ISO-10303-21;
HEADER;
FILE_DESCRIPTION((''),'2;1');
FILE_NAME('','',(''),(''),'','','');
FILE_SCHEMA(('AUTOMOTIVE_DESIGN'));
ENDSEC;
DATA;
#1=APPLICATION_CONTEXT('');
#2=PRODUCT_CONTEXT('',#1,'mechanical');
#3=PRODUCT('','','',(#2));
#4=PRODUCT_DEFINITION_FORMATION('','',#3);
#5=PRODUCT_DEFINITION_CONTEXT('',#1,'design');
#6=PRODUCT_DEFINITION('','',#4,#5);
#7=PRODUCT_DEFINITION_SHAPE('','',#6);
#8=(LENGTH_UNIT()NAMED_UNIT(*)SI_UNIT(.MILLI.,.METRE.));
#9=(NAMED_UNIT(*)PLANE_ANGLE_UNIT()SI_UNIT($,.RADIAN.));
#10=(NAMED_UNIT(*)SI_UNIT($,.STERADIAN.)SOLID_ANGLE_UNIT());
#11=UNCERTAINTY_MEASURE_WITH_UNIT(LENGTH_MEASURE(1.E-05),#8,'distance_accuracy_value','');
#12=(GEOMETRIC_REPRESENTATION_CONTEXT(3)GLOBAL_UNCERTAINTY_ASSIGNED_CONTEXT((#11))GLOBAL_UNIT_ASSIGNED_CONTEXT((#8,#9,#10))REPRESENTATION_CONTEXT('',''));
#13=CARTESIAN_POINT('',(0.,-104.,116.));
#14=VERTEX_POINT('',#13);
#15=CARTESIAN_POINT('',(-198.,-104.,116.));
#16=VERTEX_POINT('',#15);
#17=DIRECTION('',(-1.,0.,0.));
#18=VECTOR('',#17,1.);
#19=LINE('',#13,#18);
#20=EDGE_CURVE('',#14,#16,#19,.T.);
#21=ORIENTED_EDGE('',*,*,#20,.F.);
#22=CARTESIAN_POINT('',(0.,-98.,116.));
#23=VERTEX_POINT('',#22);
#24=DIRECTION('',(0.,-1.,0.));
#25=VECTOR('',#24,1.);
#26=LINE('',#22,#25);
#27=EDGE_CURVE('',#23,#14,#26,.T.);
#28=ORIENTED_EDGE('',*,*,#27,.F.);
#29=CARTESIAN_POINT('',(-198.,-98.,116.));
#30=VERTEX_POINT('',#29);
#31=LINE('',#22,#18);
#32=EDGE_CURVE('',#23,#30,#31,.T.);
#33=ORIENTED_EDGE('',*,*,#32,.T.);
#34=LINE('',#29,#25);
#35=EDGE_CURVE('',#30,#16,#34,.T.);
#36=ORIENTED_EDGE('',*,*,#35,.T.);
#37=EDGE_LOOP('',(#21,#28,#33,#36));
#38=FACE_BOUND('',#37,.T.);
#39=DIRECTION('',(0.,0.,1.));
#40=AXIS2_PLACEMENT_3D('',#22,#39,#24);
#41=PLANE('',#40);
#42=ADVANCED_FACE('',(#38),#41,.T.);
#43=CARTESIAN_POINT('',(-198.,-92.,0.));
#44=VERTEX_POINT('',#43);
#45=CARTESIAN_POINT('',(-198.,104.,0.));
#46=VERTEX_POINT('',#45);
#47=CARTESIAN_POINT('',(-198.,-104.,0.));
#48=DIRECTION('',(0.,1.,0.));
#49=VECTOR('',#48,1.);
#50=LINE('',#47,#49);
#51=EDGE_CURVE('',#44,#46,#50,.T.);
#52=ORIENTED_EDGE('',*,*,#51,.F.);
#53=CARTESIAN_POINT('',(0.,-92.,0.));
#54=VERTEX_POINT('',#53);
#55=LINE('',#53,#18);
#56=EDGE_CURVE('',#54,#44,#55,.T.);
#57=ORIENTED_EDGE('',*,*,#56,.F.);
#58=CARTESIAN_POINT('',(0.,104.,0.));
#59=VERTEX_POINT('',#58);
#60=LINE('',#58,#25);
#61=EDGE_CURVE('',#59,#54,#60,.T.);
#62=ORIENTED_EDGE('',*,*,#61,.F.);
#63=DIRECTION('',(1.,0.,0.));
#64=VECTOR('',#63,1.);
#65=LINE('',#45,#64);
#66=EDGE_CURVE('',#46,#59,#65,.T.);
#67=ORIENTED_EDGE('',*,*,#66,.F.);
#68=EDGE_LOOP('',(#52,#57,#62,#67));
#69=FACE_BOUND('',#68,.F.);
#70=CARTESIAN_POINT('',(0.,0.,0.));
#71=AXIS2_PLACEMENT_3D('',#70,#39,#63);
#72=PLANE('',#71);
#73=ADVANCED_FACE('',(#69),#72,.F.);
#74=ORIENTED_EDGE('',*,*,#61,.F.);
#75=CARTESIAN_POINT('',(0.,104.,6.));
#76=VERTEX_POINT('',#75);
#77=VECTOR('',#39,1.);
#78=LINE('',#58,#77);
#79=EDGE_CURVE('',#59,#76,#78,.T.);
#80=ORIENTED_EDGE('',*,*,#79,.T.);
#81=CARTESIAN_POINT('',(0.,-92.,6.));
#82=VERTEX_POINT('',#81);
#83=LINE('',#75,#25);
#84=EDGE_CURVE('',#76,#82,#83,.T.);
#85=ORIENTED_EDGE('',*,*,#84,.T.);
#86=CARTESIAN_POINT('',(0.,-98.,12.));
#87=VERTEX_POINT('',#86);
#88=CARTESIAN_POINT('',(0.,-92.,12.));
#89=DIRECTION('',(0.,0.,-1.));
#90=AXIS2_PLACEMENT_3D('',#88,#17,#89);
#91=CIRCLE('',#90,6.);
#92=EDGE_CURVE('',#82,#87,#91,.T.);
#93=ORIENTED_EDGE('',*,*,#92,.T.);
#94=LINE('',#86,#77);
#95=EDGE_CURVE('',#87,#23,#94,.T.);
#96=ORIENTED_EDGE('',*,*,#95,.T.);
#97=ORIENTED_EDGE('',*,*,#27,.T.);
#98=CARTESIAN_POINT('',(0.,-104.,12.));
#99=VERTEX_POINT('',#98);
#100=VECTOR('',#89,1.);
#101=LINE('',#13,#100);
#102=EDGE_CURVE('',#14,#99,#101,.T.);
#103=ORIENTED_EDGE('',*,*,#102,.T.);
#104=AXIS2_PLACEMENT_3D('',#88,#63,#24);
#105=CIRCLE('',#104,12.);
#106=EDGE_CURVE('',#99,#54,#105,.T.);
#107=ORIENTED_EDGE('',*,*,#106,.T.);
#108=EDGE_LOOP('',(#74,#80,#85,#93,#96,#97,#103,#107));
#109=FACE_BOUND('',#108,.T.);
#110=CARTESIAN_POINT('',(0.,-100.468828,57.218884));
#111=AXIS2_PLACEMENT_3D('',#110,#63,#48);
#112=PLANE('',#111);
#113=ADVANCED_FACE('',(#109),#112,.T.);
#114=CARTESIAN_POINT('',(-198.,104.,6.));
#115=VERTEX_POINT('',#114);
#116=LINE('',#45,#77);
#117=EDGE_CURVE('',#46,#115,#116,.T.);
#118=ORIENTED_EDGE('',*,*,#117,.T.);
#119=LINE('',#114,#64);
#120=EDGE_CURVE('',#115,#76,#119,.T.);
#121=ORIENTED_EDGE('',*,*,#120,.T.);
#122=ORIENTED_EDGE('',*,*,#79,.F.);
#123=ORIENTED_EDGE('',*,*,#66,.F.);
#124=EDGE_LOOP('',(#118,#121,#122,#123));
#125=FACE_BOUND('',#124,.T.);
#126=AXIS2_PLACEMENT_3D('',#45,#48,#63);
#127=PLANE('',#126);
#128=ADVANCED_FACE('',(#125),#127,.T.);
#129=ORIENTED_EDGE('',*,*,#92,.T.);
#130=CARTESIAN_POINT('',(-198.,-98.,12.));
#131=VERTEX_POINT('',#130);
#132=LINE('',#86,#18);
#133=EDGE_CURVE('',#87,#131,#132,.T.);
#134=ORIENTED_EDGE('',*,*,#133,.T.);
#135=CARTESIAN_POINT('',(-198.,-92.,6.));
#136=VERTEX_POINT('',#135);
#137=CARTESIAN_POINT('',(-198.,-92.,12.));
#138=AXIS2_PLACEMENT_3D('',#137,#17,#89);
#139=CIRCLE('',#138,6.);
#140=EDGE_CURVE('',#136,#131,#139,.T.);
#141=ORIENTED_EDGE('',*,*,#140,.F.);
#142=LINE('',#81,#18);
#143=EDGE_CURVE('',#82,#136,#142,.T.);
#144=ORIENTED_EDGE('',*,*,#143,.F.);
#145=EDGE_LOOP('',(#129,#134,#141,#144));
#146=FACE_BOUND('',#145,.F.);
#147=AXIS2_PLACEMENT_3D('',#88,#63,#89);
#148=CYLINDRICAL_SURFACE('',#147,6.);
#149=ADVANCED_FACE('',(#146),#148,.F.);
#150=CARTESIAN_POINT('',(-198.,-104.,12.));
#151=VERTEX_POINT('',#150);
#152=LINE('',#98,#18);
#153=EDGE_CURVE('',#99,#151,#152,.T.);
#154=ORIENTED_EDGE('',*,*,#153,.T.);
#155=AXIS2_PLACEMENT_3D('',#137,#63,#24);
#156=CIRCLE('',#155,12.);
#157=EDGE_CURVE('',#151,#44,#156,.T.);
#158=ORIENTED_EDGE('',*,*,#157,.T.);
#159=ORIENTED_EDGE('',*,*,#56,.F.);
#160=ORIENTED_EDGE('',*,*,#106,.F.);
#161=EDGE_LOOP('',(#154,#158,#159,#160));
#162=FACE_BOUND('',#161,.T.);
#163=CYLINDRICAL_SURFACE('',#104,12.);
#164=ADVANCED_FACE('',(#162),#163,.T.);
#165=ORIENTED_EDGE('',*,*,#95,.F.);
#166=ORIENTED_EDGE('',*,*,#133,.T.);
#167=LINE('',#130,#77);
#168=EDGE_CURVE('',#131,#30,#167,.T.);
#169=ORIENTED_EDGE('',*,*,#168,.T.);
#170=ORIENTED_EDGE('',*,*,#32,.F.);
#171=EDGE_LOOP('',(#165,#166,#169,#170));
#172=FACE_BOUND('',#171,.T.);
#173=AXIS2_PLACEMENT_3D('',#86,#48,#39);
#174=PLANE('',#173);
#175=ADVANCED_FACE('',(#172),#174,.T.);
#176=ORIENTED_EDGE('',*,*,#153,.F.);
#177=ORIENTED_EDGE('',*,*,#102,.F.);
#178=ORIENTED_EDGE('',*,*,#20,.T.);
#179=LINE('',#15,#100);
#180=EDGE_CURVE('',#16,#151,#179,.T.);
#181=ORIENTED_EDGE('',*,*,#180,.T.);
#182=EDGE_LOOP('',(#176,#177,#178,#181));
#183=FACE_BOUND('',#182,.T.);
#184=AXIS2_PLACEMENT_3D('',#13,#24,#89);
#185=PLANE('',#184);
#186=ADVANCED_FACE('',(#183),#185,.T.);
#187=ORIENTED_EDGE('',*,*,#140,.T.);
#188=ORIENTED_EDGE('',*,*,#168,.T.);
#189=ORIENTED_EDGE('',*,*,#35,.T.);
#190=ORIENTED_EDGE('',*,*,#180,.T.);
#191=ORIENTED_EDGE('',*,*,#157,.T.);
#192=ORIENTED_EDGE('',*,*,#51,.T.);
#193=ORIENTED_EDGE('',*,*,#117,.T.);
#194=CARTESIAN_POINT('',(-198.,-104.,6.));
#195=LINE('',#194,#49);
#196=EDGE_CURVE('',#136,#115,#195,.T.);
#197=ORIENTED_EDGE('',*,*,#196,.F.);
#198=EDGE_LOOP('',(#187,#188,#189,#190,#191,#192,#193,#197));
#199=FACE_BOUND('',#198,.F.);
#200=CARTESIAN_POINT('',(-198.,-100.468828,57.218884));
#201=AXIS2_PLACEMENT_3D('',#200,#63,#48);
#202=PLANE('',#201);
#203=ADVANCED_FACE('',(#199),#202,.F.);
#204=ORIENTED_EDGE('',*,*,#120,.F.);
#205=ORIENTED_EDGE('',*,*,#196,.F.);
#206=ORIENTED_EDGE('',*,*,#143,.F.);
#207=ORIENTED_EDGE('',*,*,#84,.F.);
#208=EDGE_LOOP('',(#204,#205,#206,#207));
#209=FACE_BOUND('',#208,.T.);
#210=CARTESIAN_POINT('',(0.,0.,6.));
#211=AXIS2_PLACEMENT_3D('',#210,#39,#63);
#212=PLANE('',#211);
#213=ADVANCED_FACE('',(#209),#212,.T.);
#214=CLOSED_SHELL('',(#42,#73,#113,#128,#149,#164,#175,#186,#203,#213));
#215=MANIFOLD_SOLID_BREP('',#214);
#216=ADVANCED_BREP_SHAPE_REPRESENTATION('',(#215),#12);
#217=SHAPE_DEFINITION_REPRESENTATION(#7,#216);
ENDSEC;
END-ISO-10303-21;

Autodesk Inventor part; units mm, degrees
ref_plane "YZ Plane" through (0, 0, 0) normal (1, 0, 0) x (0, 1, 0)
ref_plane "XZ Plane" through (0, 0, 0) normal (0, 1, 0) x (-1, 0, 0)
sketch "Sketch2" plane through (0, 0, 0) normal (0, 0, 1) x (1, 0, 0)
  line L0 (0, -104) -> (-198, -104)
  line L1 (-198, -104) -> (-198, 104)
  line L2 (-198, 104) -> (0, 104)
  line L3 (0, 104) -> (0, -104)
  point P0 (0, 99)
  point P1 (0, -99)
  point P2 (0, 0)
  dimension "d29" = 198
  dimension "d30" = 208
  dimension "d31" = 5
  dimension "d32" = 5
extrude "Plate2" add sketch "Sketch2" along normal blind 6
sketch "Sketch5" plane through (0, -98, 0) normal (0, -1, 0) x (1, 0, 0)
  line L0 (-198, 0) -> (0, 0)
  line L1 (0, 0) -> (0, 116)
  line L2 (0, 116) -> (-198, 116)
  line L3 (-198, 116) -> (-198, 0)
edge flange "Flange1" height 116 angle 90 thickness 6 bend radius 6 thickness toward (0, -1, 0) relief round relief width 6 relief depth 3 edges at (-99, -104, 6) wall of the first edge with corners at (-198, -98, 0) (0, -98, 0) (0, -98, 116) (-198, -98, 116)
bend "Bend1"
corner "Corner1"
ref_plane "Work Plane2" through (0, -98, 116) normal (0.5, 0, 0.8660254) x (0, -1, 0)
equation "\"d30\" = ChargingHatch_width"
equation "\"d14\" = Thickness"
equation "\"d34\" = BendReliefWidth"
equation "\"d35\" = BendReliefDepth"
equation "\"d36\" = MinimumRemnant"
equation "\"d37\" = TransitionRadius"
equation "\"d38\" = ChargingHatch_hight - Thickness"
equation "\"d40\" = BendRadius"
equation "\"d41\" = CornerReliefSize"
equation "\"d42\" = GapSize"
equation "\"d43\" = JacobiRadiusSize"
equation "\"d32\" = d31"
equation "\"BendReliefWidth\" = Thickness"
equation "\"BendReliefDepth\" = 0.5 * Thickness"
equation "\"CornerReliefSize\" = 4 * Thickness"
equation "\"MinimumRemnant\" = 2 * Thickness"
equation "\"TransitionRadius\" = BendRadius"
equation "\"JacobiRadiusSize\" = BendRadius"
equation "\"GapSize\" = Thickness"
equation "\"ChargingHatch_width\" = 208"
equation "\"Thickness\" = 6"
equation "\"ChargingHatch_hight\" = 122"
equation "\"BendRadius\" = 6"
properties part number "PRS 9672 charging tube 2_D1200" material "Steel"
